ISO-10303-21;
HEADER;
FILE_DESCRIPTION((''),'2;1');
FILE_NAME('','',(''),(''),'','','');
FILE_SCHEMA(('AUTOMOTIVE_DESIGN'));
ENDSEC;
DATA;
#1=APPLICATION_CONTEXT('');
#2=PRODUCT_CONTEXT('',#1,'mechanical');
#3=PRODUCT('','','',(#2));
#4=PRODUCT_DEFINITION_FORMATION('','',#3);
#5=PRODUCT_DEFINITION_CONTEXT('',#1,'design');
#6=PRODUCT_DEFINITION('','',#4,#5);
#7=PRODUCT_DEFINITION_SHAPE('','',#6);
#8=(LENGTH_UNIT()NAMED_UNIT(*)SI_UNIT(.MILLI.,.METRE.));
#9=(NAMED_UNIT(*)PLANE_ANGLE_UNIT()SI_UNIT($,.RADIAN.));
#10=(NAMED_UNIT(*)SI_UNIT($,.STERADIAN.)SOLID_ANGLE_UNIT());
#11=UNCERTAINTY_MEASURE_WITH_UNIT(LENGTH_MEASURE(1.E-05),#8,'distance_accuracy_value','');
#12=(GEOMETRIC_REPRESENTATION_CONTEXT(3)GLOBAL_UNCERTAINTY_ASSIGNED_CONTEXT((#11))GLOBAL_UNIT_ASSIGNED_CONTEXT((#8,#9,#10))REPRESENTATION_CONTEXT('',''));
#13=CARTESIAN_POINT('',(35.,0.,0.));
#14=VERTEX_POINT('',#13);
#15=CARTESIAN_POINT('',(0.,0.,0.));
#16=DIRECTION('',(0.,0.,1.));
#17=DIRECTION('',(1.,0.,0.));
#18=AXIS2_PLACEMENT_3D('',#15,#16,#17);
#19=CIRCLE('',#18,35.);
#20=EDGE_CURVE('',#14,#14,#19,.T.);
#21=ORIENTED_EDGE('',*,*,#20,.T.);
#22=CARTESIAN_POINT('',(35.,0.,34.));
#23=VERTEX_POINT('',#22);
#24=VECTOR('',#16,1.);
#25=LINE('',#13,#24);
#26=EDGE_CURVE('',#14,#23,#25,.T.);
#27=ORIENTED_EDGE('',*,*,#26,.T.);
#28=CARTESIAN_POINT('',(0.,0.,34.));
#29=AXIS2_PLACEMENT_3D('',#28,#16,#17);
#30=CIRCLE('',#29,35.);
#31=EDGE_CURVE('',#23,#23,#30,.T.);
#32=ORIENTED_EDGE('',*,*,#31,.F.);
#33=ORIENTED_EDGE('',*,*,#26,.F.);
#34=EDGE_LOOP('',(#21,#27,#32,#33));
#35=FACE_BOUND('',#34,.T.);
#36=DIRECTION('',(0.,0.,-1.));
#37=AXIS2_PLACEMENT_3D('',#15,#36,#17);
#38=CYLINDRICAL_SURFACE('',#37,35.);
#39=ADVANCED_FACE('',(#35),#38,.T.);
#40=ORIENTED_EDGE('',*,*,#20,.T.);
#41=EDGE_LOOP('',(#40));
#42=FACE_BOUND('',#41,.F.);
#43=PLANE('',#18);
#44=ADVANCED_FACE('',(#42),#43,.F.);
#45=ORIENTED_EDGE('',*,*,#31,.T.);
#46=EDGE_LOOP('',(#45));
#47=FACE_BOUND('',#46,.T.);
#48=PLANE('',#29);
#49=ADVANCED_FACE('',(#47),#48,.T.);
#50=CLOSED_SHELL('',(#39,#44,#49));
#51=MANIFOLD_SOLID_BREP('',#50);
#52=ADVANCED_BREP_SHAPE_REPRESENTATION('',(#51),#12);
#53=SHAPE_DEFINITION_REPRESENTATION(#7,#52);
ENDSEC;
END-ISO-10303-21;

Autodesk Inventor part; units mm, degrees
ref_plane "YZ Plane" through (0, 0, 0) normal (1, 0, 0) x (0, 1, 0)
ref_plane "XZ Plane" through (0, 0, 0) normal (0, 1, 0) x (-1, 0, 0)
ref_plane "XY Plane" through (0, 0, 0) normal (0, 0, 1) x (1, 0, 0)
sketch "Boceto1" plane through (0, 0, 0) normal (0, 0, 1) x (1, 0, 0)
  circle A0 centre (0, 0) radius 35
  dimension "d0" = 70
extrude "Extrusión1" add sketch "Boceto1" along normal blind 34
properties part number "SistemLiberacion2"
